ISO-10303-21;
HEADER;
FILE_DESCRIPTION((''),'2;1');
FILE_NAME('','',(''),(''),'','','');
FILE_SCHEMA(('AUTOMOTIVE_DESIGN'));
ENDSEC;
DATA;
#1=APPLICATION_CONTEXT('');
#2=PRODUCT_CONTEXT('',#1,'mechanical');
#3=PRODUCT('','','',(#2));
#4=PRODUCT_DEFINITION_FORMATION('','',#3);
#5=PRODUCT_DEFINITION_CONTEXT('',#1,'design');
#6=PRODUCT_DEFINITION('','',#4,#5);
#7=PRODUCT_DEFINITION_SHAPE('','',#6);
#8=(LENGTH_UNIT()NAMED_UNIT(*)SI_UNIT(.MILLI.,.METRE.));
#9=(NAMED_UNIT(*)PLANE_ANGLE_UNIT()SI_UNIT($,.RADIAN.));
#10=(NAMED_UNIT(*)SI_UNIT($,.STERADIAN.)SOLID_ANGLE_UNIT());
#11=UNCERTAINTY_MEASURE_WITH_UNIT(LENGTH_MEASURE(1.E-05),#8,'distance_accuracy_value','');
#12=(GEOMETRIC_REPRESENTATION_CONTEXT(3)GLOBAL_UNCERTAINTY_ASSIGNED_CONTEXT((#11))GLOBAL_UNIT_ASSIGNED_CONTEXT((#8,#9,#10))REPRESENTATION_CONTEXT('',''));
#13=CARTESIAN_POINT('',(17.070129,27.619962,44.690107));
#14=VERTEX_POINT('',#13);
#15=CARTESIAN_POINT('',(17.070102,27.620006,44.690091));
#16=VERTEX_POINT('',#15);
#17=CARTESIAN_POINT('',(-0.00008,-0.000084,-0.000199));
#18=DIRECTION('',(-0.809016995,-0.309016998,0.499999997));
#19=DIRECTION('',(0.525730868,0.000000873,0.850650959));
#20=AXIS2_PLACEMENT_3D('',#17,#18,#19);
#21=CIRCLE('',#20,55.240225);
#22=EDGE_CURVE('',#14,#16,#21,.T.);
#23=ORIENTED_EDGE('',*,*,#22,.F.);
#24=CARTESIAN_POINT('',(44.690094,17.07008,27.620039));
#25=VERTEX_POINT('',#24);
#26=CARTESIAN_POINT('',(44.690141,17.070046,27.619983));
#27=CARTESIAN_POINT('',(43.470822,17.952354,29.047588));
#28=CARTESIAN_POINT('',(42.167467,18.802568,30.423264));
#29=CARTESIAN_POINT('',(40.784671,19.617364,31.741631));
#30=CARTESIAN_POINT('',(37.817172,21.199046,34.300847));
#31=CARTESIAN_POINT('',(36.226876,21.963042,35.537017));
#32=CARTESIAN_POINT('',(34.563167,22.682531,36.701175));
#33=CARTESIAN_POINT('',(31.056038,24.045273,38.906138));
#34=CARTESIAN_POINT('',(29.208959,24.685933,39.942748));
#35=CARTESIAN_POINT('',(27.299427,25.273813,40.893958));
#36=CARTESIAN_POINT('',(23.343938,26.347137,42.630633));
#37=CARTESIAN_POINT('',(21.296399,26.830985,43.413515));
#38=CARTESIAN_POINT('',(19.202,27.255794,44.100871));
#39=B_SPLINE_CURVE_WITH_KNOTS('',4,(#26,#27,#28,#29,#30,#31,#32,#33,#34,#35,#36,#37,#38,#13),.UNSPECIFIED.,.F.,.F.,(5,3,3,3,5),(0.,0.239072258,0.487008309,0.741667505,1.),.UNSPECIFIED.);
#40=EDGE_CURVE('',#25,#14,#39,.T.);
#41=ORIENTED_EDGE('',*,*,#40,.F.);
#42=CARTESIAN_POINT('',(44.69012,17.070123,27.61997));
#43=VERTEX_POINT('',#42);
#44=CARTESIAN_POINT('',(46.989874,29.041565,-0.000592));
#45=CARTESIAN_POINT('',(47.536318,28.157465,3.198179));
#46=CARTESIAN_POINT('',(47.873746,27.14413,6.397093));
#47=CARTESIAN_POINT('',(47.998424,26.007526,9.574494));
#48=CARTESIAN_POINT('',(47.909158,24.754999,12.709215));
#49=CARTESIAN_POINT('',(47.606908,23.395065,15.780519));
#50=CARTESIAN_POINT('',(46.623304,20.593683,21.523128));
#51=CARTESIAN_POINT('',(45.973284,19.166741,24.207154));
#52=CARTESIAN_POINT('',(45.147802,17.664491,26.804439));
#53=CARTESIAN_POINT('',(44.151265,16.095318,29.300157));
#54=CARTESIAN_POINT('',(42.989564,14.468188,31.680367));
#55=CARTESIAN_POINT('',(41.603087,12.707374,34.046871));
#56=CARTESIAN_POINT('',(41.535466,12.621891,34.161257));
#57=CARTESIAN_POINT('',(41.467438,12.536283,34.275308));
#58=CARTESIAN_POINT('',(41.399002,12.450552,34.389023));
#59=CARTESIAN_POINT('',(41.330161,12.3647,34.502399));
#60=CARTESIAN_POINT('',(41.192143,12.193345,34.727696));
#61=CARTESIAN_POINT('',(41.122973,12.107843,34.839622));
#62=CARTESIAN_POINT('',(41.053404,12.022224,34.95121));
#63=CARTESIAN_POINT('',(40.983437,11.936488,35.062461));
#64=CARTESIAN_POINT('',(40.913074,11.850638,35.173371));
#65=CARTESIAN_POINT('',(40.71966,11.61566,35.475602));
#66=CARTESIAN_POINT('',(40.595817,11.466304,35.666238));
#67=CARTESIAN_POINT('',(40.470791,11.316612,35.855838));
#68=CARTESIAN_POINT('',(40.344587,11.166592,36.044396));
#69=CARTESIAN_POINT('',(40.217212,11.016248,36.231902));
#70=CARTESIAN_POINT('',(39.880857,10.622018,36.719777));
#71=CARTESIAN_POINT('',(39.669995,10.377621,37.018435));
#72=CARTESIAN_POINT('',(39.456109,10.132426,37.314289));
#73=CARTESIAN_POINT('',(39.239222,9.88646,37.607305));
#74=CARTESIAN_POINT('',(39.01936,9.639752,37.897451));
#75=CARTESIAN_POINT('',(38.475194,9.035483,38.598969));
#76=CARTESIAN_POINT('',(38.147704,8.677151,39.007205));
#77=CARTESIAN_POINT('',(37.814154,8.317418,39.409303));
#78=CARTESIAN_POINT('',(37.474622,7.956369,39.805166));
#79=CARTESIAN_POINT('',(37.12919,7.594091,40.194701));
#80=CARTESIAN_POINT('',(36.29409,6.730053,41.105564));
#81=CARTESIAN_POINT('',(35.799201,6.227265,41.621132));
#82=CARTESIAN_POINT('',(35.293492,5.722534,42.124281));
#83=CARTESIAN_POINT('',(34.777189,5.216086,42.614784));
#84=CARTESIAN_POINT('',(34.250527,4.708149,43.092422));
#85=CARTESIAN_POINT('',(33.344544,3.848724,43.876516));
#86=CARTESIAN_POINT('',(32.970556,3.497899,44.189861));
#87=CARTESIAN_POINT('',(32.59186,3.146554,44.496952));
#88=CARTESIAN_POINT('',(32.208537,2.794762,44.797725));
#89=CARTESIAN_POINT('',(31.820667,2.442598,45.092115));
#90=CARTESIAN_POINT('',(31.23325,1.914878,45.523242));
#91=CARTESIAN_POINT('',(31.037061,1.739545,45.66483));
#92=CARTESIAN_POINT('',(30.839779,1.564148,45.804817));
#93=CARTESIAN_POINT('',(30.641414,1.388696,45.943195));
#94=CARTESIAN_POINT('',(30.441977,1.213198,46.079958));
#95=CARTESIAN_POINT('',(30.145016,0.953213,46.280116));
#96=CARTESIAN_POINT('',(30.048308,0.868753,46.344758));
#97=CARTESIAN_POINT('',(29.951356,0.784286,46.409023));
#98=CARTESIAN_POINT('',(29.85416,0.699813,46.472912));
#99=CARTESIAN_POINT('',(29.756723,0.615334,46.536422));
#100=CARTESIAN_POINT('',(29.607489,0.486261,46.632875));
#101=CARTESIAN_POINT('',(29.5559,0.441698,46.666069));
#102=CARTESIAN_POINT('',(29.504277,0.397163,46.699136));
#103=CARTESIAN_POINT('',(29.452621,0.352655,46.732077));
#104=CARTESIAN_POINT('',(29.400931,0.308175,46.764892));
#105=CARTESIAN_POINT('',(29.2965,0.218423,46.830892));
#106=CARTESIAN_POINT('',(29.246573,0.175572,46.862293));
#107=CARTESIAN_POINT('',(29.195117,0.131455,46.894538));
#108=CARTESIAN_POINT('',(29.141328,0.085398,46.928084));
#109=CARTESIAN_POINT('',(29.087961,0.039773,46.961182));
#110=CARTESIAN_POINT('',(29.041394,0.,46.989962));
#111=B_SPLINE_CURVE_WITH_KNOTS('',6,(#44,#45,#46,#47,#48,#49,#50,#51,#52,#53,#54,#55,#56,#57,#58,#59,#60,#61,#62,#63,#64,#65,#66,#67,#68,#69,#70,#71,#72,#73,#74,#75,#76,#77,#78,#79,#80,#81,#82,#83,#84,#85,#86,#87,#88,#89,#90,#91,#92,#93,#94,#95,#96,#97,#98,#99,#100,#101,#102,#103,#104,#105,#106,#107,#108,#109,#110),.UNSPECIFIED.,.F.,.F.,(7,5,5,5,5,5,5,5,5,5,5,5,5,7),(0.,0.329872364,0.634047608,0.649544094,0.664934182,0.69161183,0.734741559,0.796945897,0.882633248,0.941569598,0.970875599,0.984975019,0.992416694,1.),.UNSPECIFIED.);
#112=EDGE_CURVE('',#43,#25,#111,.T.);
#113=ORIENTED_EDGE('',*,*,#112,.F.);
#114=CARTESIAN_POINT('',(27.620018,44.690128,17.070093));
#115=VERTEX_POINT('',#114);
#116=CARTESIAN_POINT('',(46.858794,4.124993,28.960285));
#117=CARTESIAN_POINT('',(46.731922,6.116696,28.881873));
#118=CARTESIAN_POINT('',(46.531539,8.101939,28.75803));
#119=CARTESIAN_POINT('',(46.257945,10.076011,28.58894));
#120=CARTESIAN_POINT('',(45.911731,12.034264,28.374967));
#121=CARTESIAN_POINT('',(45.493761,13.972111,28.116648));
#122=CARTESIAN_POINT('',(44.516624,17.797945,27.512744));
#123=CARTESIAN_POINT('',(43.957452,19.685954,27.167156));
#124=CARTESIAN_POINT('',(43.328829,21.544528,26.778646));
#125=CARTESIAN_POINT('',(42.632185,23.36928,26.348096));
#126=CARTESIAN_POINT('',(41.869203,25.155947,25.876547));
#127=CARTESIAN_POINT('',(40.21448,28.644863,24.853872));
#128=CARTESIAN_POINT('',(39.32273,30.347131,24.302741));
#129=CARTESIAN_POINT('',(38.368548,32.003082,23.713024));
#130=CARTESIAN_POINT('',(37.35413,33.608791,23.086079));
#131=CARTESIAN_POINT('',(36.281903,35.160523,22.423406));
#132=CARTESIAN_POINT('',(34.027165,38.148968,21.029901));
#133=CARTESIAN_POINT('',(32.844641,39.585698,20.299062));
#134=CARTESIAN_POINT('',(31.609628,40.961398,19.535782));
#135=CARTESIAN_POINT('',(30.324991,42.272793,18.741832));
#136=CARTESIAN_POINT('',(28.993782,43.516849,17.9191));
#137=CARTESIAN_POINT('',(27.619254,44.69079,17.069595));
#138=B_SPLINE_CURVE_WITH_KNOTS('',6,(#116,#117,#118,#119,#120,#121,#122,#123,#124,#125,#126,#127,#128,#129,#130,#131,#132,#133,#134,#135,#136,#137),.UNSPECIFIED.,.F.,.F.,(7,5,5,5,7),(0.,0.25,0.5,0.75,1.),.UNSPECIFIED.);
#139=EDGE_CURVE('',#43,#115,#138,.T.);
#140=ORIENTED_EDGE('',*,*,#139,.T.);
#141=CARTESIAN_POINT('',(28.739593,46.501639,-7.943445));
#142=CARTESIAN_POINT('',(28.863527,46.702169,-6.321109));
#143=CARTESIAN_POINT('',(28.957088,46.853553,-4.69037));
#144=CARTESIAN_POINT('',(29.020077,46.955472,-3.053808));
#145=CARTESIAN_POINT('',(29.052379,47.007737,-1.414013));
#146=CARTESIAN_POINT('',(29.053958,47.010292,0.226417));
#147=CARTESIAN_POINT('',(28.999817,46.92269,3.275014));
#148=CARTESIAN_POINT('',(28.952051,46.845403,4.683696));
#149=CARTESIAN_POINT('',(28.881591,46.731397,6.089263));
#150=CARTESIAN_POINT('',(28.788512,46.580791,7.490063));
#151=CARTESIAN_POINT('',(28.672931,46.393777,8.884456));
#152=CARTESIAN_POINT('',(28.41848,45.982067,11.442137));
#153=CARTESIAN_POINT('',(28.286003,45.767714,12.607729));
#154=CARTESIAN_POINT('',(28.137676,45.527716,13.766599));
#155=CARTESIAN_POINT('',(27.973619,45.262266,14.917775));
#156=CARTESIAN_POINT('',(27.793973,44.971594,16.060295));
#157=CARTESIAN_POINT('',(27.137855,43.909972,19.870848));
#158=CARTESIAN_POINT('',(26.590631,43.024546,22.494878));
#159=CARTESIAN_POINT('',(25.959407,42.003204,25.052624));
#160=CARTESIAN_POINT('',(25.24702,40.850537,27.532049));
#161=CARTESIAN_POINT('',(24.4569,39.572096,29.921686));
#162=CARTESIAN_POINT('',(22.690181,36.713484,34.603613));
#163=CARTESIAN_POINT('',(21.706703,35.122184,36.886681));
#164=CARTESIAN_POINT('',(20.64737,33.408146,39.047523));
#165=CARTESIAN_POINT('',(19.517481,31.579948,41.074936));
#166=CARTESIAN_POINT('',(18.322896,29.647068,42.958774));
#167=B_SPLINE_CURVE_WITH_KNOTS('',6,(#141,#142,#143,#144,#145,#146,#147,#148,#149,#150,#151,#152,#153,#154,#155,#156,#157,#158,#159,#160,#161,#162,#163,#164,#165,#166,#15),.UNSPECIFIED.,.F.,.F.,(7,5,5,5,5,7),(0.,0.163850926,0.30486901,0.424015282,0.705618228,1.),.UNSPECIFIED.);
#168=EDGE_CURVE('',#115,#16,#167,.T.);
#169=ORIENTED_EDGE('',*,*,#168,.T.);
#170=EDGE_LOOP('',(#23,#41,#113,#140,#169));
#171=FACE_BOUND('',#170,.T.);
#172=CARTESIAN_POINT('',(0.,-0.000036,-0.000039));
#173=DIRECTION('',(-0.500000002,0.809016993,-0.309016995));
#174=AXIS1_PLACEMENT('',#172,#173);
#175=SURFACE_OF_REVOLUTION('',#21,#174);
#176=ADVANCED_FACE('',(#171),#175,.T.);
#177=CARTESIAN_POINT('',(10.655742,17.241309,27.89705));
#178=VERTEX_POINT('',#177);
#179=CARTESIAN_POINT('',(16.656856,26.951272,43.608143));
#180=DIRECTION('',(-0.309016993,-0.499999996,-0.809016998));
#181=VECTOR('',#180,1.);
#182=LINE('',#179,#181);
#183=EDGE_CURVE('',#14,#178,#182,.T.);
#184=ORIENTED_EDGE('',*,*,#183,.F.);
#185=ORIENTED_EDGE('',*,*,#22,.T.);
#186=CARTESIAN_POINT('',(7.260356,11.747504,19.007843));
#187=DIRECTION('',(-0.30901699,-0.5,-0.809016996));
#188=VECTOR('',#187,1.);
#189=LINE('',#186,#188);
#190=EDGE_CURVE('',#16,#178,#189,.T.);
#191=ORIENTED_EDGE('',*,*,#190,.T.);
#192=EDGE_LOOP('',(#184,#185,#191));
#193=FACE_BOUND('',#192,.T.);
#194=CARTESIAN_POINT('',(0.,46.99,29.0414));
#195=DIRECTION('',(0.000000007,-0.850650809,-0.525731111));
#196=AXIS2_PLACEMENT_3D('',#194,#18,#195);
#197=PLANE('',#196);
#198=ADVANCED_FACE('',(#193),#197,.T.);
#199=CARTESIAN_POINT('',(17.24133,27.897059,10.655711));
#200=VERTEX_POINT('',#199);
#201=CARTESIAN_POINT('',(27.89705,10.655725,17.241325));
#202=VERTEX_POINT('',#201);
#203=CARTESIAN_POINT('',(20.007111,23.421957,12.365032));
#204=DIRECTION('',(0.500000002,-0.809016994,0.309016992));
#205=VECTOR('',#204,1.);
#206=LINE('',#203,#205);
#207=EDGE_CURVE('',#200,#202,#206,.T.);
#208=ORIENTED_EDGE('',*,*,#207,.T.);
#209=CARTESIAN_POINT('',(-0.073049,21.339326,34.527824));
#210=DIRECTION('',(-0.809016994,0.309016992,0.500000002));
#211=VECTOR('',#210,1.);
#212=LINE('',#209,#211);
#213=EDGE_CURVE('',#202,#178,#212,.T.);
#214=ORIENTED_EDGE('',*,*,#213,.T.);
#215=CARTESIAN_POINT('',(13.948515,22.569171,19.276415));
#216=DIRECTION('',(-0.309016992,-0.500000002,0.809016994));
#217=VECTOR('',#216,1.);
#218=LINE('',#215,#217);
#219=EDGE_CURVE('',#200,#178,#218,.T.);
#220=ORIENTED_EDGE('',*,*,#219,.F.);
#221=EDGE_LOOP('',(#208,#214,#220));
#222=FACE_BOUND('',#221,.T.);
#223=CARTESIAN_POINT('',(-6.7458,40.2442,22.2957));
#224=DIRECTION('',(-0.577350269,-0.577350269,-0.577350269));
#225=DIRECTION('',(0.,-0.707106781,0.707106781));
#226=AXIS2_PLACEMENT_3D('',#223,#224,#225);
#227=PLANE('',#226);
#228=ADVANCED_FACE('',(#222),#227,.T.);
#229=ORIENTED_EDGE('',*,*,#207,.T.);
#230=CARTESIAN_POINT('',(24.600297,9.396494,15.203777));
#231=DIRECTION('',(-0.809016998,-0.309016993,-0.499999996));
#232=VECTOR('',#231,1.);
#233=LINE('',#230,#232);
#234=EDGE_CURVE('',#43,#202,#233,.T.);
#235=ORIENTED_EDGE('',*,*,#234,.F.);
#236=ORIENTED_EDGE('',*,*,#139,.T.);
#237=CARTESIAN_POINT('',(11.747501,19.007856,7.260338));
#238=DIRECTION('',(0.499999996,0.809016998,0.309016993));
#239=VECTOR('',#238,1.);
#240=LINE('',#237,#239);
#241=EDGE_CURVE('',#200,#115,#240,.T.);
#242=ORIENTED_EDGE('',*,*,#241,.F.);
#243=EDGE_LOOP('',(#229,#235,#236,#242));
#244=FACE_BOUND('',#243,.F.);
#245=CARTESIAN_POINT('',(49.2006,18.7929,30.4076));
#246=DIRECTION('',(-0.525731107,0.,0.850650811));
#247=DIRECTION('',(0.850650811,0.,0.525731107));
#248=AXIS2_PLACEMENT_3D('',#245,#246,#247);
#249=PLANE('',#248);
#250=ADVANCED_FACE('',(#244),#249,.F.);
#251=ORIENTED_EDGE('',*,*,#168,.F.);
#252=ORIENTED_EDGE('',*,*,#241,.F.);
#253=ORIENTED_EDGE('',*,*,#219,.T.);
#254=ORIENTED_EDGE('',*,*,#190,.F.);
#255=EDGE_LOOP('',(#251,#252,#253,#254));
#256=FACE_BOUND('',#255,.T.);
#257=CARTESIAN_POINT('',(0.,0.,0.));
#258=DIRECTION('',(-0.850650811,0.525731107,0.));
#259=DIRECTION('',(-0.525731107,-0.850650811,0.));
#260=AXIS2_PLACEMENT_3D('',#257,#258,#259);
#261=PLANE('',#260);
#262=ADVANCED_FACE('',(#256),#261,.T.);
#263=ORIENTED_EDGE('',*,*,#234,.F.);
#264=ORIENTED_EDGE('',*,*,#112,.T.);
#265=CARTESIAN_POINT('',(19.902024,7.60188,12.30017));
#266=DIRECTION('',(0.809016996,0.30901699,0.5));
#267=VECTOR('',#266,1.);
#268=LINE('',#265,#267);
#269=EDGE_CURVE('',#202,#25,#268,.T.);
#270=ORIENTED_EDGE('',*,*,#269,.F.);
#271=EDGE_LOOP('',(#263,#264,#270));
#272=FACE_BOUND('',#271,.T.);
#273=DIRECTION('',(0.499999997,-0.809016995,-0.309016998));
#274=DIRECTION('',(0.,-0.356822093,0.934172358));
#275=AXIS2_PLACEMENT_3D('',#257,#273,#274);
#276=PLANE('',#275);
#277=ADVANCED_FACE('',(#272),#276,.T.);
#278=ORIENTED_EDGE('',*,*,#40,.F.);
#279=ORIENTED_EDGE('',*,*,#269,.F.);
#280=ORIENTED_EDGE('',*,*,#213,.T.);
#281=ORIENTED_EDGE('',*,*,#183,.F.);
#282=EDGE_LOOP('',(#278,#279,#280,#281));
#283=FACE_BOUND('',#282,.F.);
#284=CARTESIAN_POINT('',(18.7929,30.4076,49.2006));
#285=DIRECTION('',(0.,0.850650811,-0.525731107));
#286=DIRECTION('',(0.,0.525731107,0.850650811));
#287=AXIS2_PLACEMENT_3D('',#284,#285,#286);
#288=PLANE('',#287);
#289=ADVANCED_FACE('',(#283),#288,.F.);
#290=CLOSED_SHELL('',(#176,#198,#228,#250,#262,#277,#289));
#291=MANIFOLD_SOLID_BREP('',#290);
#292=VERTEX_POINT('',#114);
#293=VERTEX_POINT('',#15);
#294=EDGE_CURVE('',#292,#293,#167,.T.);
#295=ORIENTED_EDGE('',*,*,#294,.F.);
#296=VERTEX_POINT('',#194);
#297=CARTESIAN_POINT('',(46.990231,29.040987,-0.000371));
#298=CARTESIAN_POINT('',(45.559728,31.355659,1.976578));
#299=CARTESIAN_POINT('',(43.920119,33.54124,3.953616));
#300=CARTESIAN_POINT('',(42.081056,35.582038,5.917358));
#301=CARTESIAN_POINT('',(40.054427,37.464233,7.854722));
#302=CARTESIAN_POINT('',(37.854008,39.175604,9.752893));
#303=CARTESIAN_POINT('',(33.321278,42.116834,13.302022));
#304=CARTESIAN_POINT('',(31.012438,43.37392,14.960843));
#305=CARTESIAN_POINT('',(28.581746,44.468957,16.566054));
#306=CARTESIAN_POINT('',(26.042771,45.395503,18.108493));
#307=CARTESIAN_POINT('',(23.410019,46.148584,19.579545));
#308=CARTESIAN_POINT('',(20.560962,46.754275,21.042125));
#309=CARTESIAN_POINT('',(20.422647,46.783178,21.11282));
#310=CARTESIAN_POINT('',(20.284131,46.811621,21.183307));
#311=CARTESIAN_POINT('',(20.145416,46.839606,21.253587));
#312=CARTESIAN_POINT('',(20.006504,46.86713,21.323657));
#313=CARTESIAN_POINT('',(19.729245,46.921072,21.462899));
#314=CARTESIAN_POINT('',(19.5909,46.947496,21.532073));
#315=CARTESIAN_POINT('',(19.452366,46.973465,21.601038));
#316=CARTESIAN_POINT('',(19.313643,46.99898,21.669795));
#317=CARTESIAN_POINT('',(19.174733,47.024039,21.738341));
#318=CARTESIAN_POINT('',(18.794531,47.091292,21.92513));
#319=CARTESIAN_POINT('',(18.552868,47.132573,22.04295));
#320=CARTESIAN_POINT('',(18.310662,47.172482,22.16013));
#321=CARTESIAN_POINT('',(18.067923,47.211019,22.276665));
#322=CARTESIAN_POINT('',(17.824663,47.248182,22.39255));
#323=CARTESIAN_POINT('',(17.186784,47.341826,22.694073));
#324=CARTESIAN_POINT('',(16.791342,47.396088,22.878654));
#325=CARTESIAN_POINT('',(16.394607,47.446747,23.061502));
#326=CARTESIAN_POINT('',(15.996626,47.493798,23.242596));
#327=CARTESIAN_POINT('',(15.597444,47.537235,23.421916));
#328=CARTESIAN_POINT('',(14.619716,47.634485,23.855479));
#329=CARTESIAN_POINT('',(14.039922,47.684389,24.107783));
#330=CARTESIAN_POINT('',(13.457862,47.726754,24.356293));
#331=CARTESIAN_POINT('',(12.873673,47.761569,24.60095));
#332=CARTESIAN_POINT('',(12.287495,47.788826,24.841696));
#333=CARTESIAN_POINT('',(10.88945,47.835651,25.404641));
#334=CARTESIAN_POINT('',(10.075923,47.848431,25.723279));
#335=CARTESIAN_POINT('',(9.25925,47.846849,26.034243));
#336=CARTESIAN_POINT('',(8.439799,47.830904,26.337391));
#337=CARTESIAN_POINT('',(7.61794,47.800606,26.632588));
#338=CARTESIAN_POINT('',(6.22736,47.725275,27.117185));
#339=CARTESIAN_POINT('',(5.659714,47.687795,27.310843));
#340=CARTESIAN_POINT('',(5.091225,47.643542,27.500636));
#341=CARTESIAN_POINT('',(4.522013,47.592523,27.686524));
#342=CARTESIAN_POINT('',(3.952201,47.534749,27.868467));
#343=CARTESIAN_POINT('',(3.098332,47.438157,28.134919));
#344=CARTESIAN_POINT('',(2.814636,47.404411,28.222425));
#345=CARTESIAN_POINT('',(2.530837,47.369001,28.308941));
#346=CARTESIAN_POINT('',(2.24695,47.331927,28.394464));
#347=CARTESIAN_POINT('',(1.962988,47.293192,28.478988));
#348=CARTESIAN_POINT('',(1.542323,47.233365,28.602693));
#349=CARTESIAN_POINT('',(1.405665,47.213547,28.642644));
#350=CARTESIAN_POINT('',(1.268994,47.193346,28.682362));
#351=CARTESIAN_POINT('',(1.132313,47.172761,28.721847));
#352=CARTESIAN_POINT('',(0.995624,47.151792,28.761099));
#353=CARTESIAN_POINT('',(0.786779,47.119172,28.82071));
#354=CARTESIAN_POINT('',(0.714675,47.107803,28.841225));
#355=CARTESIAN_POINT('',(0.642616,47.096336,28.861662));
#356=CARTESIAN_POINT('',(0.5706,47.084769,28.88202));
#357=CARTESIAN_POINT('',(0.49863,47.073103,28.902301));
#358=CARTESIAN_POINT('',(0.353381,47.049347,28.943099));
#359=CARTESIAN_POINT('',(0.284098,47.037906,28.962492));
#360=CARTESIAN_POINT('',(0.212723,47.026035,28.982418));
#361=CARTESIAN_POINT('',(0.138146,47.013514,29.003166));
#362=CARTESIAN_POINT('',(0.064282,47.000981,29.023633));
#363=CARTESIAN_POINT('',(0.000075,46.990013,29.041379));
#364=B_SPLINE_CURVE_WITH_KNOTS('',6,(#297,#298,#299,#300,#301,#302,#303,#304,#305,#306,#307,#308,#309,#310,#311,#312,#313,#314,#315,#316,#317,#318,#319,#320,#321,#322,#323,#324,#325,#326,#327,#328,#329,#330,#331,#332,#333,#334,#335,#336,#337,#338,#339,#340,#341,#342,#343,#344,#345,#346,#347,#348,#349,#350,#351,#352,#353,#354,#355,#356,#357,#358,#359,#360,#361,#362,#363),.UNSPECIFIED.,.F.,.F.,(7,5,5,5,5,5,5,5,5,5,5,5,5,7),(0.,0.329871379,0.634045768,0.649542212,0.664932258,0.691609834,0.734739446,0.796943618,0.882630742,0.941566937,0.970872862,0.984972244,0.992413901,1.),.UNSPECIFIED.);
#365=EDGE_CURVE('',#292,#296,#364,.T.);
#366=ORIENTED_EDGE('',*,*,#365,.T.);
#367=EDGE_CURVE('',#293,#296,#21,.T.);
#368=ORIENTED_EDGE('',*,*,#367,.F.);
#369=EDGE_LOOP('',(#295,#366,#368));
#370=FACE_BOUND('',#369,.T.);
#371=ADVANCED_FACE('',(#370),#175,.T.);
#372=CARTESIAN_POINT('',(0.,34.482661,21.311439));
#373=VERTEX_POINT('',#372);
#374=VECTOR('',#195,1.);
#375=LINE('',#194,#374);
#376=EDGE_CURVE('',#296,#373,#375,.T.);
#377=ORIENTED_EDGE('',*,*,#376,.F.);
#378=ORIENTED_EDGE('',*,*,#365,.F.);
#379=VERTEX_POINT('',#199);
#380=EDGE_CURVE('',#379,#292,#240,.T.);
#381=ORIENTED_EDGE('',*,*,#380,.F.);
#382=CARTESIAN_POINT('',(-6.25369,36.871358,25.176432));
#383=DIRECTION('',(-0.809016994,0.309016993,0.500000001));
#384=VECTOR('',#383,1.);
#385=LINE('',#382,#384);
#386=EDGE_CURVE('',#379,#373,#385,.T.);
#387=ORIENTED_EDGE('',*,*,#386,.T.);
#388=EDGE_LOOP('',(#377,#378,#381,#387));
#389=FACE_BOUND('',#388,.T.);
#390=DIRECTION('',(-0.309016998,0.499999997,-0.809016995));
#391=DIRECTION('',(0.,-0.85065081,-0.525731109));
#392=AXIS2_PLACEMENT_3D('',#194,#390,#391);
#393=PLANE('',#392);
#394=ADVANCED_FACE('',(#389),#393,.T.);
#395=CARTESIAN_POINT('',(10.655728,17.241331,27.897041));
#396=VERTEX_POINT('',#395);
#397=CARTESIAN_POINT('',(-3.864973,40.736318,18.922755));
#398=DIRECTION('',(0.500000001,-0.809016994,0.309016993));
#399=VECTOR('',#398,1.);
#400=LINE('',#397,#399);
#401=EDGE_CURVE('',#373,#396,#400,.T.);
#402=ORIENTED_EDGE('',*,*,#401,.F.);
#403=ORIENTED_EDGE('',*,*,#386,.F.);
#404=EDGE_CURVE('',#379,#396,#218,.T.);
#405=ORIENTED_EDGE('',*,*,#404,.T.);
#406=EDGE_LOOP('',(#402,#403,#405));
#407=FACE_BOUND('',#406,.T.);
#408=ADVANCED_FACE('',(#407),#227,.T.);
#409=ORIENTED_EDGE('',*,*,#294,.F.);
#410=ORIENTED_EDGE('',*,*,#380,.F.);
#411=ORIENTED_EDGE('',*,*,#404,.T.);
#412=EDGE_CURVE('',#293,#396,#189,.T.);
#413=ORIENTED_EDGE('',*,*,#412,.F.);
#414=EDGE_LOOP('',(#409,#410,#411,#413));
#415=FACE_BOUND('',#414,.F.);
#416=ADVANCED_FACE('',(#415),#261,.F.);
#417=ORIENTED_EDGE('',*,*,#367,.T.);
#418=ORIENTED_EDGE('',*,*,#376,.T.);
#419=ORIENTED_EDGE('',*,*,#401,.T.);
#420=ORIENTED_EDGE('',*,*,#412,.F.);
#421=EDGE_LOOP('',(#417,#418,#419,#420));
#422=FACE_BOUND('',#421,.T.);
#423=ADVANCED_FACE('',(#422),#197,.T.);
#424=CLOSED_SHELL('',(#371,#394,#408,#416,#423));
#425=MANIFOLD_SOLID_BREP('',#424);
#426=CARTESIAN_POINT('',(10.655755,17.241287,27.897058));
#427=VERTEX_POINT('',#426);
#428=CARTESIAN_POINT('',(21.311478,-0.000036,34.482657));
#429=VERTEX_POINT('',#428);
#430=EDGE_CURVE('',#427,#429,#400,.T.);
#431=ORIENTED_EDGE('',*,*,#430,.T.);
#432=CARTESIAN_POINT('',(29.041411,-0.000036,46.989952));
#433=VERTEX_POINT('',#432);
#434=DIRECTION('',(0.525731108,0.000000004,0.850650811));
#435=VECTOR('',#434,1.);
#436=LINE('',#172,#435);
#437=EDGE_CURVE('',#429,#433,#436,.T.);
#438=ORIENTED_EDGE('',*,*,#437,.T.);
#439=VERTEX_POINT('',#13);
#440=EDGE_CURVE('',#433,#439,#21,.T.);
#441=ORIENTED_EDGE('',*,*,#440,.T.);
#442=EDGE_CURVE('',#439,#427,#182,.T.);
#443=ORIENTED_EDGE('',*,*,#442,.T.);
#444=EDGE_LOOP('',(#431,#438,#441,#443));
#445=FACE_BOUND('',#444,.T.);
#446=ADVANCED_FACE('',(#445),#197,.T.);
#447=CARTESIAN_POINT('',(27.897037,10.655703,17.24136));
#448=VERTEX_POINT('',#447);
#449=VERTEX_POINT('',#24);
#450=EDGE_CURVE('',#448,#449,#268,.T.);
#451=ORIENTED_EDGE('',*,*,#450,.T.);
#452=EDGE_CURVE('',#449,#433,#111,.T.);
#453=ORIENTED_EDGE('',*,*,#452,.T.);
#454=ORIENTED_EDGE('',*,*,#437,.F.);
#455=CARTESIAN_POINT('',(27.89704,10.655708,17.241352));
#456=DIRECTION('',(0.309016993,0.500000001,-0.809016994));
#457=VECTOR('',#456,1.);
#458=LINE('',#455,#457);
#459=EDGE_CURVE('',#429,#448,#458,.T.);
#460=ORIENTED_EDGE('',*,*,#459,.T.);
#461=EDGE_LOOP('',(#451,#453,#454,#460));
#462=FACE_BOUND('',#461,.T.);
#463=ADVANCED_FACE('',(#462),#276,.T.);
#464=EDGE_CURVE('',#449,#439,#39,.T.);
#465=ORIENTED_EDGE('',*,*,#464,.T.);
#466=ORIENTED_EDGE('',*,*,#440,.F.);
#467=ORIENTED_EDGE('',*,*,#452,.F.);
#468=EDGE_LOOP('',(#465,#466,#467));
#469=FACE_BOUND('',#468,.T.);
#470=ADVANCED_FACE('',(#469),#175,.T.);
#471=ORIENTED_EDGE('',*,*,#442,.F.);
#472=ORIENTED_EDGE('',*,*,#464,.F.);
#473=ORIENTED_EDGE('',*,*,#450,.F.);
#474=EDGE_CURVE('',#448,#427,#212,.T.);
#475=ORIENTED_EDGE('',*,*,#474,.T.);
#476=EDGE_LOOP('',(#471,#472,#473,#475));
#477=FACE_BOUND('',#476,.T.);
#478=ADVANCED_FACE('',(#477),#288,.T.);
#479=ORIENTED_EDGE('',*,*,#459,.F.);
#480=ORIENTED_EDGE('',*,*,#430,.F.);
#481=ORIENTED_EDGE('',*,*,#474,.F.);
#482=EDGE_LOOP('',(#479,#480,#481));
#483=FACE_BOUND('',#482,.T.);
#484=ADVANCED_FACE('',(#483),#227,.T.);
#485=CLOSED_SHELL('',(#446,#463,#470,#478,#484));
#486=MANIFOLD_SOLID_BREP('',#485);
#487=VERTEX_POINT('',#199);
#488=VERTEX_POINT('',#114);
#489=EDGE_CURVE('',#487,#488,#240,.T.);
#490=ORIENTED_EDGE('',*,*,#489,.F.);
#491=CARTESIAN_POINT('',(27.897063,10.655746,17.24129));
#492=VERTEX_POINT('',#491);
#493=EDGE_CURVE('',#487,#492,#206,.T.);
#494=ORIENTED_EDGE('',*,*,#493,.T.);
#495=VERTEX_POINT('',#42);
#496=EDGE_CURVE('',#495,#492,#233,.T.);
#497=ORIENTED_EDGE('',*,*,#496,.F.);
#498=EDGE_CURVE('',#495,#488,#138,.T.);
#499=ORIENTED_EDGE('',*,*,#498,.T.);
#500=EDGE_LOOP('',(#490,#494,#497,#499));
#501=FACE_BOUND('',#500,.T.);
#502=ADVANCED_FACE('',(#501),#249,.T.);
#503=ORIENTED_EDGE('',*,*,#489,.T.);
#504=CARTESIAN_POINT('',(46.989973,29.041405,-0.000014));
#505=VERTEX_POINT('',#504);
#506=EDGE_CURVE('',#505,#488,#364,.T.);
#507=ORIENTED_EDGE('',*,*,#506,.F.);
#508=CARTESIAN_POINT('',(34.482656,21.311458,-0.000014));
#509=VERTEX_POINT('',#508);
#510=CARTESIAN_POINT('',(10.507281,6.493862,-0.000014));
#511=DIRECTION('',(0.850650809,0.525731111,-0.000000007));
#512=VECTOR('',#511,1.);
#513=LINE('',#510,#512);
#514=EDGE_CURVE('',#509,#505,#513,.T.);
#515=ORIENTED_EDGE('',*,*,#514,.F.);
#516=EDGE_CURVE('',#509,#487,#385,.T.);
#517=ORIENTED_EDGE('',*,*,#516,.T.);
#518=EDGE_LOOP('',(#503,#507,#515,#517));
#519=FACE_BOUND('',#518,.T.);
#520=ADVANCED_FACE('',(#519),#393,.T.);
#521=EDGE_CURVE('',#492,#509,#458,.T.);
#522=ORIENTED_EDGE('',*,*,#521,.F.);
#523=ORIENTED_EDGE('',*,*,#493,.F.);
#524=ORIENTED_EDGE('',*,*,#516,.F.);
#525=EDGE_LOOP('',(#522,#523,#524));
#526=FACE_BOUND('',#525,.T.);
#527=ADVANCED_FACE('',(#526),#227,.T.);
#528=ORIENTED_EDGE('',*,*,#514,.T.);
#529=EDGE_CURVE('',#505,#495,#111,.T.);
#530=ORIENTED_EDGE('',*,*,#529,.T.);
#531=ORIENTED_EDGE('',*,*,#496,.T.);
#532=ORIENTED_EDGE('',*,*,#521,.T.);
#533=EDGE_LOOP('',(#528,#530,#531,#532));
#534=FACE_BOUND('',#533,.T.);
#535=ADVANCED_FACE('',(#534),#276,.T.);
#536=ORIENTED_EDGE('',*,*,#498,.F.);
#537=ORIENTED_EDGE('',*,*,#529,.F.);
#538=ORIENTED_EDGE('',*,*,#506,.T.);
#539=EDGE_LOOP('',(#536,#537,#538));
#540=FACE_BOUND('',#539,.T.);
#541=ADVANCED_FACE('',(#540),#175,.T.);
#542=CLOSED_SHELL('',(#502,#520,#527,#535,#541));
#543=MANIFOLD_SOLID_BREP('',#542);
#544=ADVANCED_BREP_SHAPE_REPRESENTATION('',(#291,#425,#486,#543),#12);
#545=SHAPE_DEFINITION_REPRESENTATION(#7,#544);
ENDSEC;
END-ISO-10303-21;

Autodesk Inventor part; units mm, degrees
sketch "Sketch1" plane through (0, 0, 0) normal (0, 0, 1) x (1, 0, 0)
  line L0 (-46.99, -29.0414) -> (46.99, -29.0414)
  line L1 (46.99, -29.0414) -> (46.99, 29.0414)
  line L2 (46.99, 29.0414) -> (-46.99, 29.0414)
  line L3 (-46.99, 29.0414) -> (-46.99, -29.0414)
  point P0 (0, 0)
  dimension "d3" = 46.99
  dimension "d4" = 46.99
  dimension "d5" = 29.0414
  dimension "d6" = 29.0414
sketch "Sketch4" plane through (0, 0, 0) normal (1, 0, 0) x (0, 1, 0)
  line L0 (-47.0942, 0) -> (47.0942, 0)
  line L1 (-46.99, -29.0414) -> (46.99, -29.0414)
  line L2 (46.99, -29.0414) -> (46.99, 29.0414)
  line L3 (46.99, 29.0414) -> (-46.99, 29.0414)
  line L4 (-46.99, 29.0414) -> (-46.99, -29.0414)
  point P0 (0, 0)
  point P1 (0, 0)
  dimension "d38" = 29.0414
  dimension "d39" = 29.0414
  dimension "d40" = 46.99
  dimension "d41" = 46.99
sketch "Sketch5" plane through (0, 0, 0) normal (0, 1, 0) x (-1, 0, 0)
  line L0 (-29.0414, -46.99) -> (29.0414, -46.99)
  line L1 (29.0414, -46.99) -> (29.0414, 46.99)
  line L2 (29.0414, 46.99) -> (-29.0414, 46.99)
  line L3 (-29.0414, 46.99) -> (-29.0414, -46.99)
  point P0 (0, 0)
  point P1 (0, 0)
  point P2 (0, 0)
  dimension "d31" = 29.0414
  dimension "d32" = 29.0414
  dimension "d33" = 46.99
  dimension "d34" = 46.99
sketch3d "3D Sketch1"
ref_plane "Work Plane1" through (0, 46.99, 29.0414) normal (-0.5773503, -0.5773503, -0.5773503) x (0.809017, -0.309017, -0.5)
sketch "Sketch6" plane through (0, 46.99, 29.0414) normal (-0.5773503, -0.5773503, -0.5773503) x (0.809017, -0.309017, -0.5)
  line L0 (0, 0) -> (29.0414, 50.3012) projected
  line L1 (0, 0) -> (58.0828, 0) projected
  line L2 (29.0414, 50.3012) -> (58.0828, 0) projected
  line L3 (14.5207, 25.1506) -> (29.0414, 0)
  line L4 (29.0414, 0) -> (43.5621, 25.1506)
  line L5 (14.5207, 25.1506) -> (43.5621, 25.1506)
  circle A0 centre (29.0414, 16.7671) radius 12.7
  dimension "d48" = 25.4
sketch3d "3D Sketch2"
ref_plane "Work Plane2" through (-6.7458, 40.2442, 22.2957) normal (-0.5773503, -0.5773503, -0.5773503) x (0.809017, -0.309017, -0.5)
sketch "Sketch8" plane through (-6.7458, 40.2442, 22.2957) normal (-0.5773503, -0.5773503, -0.5773503) x (0.809017, -0.309017, -0.5)
  line L0 (18.3857, 22.9192) -> (39.6971, 22.9192)
  line L1 (39.6971, 22.9192) -> (29.0414, 4.4629)
  line L2 (29.0414, 4.4629) -> (18.3857, 22.9192)
  line L3 (29.0414, 4.4629) -> (50.3529, 4.4629)
  line L4 (39.6971, 22.9192) -> (50.3529, 4.4629)
  line L5 (7.73, 4.4629) -> (18.3857, 22.9192)
  line L6 (7.73, 4.4629) -> (29.0414, 4.4629)
  line L7 (39.6971, 22.9192) -> (29.0414, 41.3754)
  line L8 (18.3857, 22.9192) -> (29.0414, 41.3754)
  point P0 (29.0414, 16.7671)
ref_plane "Work Plane4" through (0, 46.99, 29.0414) normal (-0.809017, -0.309017, 0.5) x (0, -0.8506508, -0.5257311)
sketch "Sketch9" plane through (0, 46.99, 29.0414) normal (-0.809017, -0.309017, 0.5) x (0, -0.8506508, -0.5257311)
  line L0 (0, 0) -> (55.2401, 0) projected
  line L1 (55.2401, 0) -> (30.536, 49.4082) projected
  line L2 (0, 0) -> (14.7032, 0)
  line L3 (30.536, 49.4082) -> (37.1114, 36.2572)
  line L4 (55.2401, 0) -> (79.9442, 39.9721) construction
  arc A0 (30.536, 49.4082) -> (0, 0) centre (55.2401, 0) ccw
  dimension "d43" = 46.99
ref_plane "Work Plane7" through (0, 46.99, 29.0414) normal (-0.309017, 0.5, -0.809017) x (0.809017, -0.309017, -0.5)
ref_plane "Work Plane9" through (46.99, 29.0414, 0) normal (-0.1624598, 0.2628656, 0.9510565) x (-0.8506508, -0.5257311, 0)
revolve "Revolution2" add sketch "Sketch9" angle 58.283 about axis through (0, 0, 0) along (-0.5, 0.809017, -0.309017)
ref_plane "Work Plane10" through (0, 0, 0) normal (0.5, -0.809017, -0.309017) x (0.8506508, 0.5257311, 0)
ref_plane "Work Plane11" through (0, 46.99, 29.0414) normal (-0.309017, 0.5, -0.809017) x (0.809017, -0.309017, -0.5)
split "Split4" plane through (0, 0, 0) removes the side toward (0.5, -0.809017, -0.309017)
split "Split5" plane through (0, 46.99, 29.0414) removes the side toward (-0.309017, 0.5, -0.809017)
ref_plane "Work Plane13" through (18.7929, 30.4076, 49.2006) normal (0, 0.8506508, -0.5257311) x (0.809017, -0.309017, -0.5)
ref_plane "Work Plane14" through (49.2006, 18.7929, 30.4076) normal (-0.5257311, 0, 0.8506508) x (-0.5, 0.809017, -0.309017)
ref_plane "Work Plane15" through (0, 0, 0) normal (-0.8506508, 0.5257311, 0) x (0.309017, 0.5, 0.809017)
split body "Split7" result two bodies by plane through (0, 0, 0) normal (-0.8506508, 0.5257311, 0) first body at (17.4067, 29.1157, 14.0495)
split body "Split8" result two bodies by plane through (49.2006, 18.7929, 30.4076) normal (-0.5257311, 0, 0.8506508) bodies 3 first body at (26.8909, 19.1826, 16.0317)
split body "Split9" result two bodies by plane through (18.7929, 30.4076, 49.2006) normal (0, 0.8506508, -0.5257311) bodies 5 first body at (26.3652, 19.1826, 16.8824)
shell "Shell1" [suppressed]
shell "Shell2" [suppressed]
split "Split10" plane through (-6.7458, 40.2442, 22.2957) removes the side toward (-0.5773503, -0.5773503, -0.5773503)
split "Split11" plane through (-6.7458, 40.2442, 22.2957) removes the side toward (-0.5773503, -0.5773503, -0.5773503)
split "Split12" plane through (-6.7458, 40.2442, 22.2957) removes the side toward (-0.5773503, -0.5773503, -0.5773503)
split "Split13" plane through (-6.7458, 40.2442, 22.2957) removes the side toward (-0.5773503, -0.5773503, -0.5773503)
ref_plane "Work Plane16" through (29.0414, 0, 46.99) normal (0.5773503, 0.5773503, 0.5773503) x (0.309017, 0.5, -0.809017)
sketch "Sketch17" plane through (29.0414, 0, 46.99) normal (0.5773503, 0.5773503, 0.5773503) x (0.309017, 0.5, -0.809017)
  point P0 (29.0414, 16.7671)
equation "\"d3\" = radius"
equation "\"d4\" = radius"
equation "\"d40\" = radius"
equation "\"d41\" = radius"
equation "\"d33\" = radius"
equation "\"d34\" = radius"
equation "\"d43\" = radius"
equation "\"d46\" = wall_thick"
equation "\"d47\" = wall_thick"
equation "\"radius\" = 46.99"
equation "\"inset\" = 11.684"
equation "\"gratio\" = 1.618034"
equation "\"d11\" = radius"
equation "\"d12\" = gratio"
equation "\"d17\" = radius"
equation "\"d18\" = gratio"
equation "\"d23\" = radius"
equation "\"d24\" = gratio"
equation "\"d29\" = radius"
equation "\"d30\" = gratio"
equation "\"d35\" = radius"
equation "\"d36\" = gratio"
equation "\"d37\" = inset"
equation "\"wall_thick\" = 1.27"
properties part number "ommatid"
